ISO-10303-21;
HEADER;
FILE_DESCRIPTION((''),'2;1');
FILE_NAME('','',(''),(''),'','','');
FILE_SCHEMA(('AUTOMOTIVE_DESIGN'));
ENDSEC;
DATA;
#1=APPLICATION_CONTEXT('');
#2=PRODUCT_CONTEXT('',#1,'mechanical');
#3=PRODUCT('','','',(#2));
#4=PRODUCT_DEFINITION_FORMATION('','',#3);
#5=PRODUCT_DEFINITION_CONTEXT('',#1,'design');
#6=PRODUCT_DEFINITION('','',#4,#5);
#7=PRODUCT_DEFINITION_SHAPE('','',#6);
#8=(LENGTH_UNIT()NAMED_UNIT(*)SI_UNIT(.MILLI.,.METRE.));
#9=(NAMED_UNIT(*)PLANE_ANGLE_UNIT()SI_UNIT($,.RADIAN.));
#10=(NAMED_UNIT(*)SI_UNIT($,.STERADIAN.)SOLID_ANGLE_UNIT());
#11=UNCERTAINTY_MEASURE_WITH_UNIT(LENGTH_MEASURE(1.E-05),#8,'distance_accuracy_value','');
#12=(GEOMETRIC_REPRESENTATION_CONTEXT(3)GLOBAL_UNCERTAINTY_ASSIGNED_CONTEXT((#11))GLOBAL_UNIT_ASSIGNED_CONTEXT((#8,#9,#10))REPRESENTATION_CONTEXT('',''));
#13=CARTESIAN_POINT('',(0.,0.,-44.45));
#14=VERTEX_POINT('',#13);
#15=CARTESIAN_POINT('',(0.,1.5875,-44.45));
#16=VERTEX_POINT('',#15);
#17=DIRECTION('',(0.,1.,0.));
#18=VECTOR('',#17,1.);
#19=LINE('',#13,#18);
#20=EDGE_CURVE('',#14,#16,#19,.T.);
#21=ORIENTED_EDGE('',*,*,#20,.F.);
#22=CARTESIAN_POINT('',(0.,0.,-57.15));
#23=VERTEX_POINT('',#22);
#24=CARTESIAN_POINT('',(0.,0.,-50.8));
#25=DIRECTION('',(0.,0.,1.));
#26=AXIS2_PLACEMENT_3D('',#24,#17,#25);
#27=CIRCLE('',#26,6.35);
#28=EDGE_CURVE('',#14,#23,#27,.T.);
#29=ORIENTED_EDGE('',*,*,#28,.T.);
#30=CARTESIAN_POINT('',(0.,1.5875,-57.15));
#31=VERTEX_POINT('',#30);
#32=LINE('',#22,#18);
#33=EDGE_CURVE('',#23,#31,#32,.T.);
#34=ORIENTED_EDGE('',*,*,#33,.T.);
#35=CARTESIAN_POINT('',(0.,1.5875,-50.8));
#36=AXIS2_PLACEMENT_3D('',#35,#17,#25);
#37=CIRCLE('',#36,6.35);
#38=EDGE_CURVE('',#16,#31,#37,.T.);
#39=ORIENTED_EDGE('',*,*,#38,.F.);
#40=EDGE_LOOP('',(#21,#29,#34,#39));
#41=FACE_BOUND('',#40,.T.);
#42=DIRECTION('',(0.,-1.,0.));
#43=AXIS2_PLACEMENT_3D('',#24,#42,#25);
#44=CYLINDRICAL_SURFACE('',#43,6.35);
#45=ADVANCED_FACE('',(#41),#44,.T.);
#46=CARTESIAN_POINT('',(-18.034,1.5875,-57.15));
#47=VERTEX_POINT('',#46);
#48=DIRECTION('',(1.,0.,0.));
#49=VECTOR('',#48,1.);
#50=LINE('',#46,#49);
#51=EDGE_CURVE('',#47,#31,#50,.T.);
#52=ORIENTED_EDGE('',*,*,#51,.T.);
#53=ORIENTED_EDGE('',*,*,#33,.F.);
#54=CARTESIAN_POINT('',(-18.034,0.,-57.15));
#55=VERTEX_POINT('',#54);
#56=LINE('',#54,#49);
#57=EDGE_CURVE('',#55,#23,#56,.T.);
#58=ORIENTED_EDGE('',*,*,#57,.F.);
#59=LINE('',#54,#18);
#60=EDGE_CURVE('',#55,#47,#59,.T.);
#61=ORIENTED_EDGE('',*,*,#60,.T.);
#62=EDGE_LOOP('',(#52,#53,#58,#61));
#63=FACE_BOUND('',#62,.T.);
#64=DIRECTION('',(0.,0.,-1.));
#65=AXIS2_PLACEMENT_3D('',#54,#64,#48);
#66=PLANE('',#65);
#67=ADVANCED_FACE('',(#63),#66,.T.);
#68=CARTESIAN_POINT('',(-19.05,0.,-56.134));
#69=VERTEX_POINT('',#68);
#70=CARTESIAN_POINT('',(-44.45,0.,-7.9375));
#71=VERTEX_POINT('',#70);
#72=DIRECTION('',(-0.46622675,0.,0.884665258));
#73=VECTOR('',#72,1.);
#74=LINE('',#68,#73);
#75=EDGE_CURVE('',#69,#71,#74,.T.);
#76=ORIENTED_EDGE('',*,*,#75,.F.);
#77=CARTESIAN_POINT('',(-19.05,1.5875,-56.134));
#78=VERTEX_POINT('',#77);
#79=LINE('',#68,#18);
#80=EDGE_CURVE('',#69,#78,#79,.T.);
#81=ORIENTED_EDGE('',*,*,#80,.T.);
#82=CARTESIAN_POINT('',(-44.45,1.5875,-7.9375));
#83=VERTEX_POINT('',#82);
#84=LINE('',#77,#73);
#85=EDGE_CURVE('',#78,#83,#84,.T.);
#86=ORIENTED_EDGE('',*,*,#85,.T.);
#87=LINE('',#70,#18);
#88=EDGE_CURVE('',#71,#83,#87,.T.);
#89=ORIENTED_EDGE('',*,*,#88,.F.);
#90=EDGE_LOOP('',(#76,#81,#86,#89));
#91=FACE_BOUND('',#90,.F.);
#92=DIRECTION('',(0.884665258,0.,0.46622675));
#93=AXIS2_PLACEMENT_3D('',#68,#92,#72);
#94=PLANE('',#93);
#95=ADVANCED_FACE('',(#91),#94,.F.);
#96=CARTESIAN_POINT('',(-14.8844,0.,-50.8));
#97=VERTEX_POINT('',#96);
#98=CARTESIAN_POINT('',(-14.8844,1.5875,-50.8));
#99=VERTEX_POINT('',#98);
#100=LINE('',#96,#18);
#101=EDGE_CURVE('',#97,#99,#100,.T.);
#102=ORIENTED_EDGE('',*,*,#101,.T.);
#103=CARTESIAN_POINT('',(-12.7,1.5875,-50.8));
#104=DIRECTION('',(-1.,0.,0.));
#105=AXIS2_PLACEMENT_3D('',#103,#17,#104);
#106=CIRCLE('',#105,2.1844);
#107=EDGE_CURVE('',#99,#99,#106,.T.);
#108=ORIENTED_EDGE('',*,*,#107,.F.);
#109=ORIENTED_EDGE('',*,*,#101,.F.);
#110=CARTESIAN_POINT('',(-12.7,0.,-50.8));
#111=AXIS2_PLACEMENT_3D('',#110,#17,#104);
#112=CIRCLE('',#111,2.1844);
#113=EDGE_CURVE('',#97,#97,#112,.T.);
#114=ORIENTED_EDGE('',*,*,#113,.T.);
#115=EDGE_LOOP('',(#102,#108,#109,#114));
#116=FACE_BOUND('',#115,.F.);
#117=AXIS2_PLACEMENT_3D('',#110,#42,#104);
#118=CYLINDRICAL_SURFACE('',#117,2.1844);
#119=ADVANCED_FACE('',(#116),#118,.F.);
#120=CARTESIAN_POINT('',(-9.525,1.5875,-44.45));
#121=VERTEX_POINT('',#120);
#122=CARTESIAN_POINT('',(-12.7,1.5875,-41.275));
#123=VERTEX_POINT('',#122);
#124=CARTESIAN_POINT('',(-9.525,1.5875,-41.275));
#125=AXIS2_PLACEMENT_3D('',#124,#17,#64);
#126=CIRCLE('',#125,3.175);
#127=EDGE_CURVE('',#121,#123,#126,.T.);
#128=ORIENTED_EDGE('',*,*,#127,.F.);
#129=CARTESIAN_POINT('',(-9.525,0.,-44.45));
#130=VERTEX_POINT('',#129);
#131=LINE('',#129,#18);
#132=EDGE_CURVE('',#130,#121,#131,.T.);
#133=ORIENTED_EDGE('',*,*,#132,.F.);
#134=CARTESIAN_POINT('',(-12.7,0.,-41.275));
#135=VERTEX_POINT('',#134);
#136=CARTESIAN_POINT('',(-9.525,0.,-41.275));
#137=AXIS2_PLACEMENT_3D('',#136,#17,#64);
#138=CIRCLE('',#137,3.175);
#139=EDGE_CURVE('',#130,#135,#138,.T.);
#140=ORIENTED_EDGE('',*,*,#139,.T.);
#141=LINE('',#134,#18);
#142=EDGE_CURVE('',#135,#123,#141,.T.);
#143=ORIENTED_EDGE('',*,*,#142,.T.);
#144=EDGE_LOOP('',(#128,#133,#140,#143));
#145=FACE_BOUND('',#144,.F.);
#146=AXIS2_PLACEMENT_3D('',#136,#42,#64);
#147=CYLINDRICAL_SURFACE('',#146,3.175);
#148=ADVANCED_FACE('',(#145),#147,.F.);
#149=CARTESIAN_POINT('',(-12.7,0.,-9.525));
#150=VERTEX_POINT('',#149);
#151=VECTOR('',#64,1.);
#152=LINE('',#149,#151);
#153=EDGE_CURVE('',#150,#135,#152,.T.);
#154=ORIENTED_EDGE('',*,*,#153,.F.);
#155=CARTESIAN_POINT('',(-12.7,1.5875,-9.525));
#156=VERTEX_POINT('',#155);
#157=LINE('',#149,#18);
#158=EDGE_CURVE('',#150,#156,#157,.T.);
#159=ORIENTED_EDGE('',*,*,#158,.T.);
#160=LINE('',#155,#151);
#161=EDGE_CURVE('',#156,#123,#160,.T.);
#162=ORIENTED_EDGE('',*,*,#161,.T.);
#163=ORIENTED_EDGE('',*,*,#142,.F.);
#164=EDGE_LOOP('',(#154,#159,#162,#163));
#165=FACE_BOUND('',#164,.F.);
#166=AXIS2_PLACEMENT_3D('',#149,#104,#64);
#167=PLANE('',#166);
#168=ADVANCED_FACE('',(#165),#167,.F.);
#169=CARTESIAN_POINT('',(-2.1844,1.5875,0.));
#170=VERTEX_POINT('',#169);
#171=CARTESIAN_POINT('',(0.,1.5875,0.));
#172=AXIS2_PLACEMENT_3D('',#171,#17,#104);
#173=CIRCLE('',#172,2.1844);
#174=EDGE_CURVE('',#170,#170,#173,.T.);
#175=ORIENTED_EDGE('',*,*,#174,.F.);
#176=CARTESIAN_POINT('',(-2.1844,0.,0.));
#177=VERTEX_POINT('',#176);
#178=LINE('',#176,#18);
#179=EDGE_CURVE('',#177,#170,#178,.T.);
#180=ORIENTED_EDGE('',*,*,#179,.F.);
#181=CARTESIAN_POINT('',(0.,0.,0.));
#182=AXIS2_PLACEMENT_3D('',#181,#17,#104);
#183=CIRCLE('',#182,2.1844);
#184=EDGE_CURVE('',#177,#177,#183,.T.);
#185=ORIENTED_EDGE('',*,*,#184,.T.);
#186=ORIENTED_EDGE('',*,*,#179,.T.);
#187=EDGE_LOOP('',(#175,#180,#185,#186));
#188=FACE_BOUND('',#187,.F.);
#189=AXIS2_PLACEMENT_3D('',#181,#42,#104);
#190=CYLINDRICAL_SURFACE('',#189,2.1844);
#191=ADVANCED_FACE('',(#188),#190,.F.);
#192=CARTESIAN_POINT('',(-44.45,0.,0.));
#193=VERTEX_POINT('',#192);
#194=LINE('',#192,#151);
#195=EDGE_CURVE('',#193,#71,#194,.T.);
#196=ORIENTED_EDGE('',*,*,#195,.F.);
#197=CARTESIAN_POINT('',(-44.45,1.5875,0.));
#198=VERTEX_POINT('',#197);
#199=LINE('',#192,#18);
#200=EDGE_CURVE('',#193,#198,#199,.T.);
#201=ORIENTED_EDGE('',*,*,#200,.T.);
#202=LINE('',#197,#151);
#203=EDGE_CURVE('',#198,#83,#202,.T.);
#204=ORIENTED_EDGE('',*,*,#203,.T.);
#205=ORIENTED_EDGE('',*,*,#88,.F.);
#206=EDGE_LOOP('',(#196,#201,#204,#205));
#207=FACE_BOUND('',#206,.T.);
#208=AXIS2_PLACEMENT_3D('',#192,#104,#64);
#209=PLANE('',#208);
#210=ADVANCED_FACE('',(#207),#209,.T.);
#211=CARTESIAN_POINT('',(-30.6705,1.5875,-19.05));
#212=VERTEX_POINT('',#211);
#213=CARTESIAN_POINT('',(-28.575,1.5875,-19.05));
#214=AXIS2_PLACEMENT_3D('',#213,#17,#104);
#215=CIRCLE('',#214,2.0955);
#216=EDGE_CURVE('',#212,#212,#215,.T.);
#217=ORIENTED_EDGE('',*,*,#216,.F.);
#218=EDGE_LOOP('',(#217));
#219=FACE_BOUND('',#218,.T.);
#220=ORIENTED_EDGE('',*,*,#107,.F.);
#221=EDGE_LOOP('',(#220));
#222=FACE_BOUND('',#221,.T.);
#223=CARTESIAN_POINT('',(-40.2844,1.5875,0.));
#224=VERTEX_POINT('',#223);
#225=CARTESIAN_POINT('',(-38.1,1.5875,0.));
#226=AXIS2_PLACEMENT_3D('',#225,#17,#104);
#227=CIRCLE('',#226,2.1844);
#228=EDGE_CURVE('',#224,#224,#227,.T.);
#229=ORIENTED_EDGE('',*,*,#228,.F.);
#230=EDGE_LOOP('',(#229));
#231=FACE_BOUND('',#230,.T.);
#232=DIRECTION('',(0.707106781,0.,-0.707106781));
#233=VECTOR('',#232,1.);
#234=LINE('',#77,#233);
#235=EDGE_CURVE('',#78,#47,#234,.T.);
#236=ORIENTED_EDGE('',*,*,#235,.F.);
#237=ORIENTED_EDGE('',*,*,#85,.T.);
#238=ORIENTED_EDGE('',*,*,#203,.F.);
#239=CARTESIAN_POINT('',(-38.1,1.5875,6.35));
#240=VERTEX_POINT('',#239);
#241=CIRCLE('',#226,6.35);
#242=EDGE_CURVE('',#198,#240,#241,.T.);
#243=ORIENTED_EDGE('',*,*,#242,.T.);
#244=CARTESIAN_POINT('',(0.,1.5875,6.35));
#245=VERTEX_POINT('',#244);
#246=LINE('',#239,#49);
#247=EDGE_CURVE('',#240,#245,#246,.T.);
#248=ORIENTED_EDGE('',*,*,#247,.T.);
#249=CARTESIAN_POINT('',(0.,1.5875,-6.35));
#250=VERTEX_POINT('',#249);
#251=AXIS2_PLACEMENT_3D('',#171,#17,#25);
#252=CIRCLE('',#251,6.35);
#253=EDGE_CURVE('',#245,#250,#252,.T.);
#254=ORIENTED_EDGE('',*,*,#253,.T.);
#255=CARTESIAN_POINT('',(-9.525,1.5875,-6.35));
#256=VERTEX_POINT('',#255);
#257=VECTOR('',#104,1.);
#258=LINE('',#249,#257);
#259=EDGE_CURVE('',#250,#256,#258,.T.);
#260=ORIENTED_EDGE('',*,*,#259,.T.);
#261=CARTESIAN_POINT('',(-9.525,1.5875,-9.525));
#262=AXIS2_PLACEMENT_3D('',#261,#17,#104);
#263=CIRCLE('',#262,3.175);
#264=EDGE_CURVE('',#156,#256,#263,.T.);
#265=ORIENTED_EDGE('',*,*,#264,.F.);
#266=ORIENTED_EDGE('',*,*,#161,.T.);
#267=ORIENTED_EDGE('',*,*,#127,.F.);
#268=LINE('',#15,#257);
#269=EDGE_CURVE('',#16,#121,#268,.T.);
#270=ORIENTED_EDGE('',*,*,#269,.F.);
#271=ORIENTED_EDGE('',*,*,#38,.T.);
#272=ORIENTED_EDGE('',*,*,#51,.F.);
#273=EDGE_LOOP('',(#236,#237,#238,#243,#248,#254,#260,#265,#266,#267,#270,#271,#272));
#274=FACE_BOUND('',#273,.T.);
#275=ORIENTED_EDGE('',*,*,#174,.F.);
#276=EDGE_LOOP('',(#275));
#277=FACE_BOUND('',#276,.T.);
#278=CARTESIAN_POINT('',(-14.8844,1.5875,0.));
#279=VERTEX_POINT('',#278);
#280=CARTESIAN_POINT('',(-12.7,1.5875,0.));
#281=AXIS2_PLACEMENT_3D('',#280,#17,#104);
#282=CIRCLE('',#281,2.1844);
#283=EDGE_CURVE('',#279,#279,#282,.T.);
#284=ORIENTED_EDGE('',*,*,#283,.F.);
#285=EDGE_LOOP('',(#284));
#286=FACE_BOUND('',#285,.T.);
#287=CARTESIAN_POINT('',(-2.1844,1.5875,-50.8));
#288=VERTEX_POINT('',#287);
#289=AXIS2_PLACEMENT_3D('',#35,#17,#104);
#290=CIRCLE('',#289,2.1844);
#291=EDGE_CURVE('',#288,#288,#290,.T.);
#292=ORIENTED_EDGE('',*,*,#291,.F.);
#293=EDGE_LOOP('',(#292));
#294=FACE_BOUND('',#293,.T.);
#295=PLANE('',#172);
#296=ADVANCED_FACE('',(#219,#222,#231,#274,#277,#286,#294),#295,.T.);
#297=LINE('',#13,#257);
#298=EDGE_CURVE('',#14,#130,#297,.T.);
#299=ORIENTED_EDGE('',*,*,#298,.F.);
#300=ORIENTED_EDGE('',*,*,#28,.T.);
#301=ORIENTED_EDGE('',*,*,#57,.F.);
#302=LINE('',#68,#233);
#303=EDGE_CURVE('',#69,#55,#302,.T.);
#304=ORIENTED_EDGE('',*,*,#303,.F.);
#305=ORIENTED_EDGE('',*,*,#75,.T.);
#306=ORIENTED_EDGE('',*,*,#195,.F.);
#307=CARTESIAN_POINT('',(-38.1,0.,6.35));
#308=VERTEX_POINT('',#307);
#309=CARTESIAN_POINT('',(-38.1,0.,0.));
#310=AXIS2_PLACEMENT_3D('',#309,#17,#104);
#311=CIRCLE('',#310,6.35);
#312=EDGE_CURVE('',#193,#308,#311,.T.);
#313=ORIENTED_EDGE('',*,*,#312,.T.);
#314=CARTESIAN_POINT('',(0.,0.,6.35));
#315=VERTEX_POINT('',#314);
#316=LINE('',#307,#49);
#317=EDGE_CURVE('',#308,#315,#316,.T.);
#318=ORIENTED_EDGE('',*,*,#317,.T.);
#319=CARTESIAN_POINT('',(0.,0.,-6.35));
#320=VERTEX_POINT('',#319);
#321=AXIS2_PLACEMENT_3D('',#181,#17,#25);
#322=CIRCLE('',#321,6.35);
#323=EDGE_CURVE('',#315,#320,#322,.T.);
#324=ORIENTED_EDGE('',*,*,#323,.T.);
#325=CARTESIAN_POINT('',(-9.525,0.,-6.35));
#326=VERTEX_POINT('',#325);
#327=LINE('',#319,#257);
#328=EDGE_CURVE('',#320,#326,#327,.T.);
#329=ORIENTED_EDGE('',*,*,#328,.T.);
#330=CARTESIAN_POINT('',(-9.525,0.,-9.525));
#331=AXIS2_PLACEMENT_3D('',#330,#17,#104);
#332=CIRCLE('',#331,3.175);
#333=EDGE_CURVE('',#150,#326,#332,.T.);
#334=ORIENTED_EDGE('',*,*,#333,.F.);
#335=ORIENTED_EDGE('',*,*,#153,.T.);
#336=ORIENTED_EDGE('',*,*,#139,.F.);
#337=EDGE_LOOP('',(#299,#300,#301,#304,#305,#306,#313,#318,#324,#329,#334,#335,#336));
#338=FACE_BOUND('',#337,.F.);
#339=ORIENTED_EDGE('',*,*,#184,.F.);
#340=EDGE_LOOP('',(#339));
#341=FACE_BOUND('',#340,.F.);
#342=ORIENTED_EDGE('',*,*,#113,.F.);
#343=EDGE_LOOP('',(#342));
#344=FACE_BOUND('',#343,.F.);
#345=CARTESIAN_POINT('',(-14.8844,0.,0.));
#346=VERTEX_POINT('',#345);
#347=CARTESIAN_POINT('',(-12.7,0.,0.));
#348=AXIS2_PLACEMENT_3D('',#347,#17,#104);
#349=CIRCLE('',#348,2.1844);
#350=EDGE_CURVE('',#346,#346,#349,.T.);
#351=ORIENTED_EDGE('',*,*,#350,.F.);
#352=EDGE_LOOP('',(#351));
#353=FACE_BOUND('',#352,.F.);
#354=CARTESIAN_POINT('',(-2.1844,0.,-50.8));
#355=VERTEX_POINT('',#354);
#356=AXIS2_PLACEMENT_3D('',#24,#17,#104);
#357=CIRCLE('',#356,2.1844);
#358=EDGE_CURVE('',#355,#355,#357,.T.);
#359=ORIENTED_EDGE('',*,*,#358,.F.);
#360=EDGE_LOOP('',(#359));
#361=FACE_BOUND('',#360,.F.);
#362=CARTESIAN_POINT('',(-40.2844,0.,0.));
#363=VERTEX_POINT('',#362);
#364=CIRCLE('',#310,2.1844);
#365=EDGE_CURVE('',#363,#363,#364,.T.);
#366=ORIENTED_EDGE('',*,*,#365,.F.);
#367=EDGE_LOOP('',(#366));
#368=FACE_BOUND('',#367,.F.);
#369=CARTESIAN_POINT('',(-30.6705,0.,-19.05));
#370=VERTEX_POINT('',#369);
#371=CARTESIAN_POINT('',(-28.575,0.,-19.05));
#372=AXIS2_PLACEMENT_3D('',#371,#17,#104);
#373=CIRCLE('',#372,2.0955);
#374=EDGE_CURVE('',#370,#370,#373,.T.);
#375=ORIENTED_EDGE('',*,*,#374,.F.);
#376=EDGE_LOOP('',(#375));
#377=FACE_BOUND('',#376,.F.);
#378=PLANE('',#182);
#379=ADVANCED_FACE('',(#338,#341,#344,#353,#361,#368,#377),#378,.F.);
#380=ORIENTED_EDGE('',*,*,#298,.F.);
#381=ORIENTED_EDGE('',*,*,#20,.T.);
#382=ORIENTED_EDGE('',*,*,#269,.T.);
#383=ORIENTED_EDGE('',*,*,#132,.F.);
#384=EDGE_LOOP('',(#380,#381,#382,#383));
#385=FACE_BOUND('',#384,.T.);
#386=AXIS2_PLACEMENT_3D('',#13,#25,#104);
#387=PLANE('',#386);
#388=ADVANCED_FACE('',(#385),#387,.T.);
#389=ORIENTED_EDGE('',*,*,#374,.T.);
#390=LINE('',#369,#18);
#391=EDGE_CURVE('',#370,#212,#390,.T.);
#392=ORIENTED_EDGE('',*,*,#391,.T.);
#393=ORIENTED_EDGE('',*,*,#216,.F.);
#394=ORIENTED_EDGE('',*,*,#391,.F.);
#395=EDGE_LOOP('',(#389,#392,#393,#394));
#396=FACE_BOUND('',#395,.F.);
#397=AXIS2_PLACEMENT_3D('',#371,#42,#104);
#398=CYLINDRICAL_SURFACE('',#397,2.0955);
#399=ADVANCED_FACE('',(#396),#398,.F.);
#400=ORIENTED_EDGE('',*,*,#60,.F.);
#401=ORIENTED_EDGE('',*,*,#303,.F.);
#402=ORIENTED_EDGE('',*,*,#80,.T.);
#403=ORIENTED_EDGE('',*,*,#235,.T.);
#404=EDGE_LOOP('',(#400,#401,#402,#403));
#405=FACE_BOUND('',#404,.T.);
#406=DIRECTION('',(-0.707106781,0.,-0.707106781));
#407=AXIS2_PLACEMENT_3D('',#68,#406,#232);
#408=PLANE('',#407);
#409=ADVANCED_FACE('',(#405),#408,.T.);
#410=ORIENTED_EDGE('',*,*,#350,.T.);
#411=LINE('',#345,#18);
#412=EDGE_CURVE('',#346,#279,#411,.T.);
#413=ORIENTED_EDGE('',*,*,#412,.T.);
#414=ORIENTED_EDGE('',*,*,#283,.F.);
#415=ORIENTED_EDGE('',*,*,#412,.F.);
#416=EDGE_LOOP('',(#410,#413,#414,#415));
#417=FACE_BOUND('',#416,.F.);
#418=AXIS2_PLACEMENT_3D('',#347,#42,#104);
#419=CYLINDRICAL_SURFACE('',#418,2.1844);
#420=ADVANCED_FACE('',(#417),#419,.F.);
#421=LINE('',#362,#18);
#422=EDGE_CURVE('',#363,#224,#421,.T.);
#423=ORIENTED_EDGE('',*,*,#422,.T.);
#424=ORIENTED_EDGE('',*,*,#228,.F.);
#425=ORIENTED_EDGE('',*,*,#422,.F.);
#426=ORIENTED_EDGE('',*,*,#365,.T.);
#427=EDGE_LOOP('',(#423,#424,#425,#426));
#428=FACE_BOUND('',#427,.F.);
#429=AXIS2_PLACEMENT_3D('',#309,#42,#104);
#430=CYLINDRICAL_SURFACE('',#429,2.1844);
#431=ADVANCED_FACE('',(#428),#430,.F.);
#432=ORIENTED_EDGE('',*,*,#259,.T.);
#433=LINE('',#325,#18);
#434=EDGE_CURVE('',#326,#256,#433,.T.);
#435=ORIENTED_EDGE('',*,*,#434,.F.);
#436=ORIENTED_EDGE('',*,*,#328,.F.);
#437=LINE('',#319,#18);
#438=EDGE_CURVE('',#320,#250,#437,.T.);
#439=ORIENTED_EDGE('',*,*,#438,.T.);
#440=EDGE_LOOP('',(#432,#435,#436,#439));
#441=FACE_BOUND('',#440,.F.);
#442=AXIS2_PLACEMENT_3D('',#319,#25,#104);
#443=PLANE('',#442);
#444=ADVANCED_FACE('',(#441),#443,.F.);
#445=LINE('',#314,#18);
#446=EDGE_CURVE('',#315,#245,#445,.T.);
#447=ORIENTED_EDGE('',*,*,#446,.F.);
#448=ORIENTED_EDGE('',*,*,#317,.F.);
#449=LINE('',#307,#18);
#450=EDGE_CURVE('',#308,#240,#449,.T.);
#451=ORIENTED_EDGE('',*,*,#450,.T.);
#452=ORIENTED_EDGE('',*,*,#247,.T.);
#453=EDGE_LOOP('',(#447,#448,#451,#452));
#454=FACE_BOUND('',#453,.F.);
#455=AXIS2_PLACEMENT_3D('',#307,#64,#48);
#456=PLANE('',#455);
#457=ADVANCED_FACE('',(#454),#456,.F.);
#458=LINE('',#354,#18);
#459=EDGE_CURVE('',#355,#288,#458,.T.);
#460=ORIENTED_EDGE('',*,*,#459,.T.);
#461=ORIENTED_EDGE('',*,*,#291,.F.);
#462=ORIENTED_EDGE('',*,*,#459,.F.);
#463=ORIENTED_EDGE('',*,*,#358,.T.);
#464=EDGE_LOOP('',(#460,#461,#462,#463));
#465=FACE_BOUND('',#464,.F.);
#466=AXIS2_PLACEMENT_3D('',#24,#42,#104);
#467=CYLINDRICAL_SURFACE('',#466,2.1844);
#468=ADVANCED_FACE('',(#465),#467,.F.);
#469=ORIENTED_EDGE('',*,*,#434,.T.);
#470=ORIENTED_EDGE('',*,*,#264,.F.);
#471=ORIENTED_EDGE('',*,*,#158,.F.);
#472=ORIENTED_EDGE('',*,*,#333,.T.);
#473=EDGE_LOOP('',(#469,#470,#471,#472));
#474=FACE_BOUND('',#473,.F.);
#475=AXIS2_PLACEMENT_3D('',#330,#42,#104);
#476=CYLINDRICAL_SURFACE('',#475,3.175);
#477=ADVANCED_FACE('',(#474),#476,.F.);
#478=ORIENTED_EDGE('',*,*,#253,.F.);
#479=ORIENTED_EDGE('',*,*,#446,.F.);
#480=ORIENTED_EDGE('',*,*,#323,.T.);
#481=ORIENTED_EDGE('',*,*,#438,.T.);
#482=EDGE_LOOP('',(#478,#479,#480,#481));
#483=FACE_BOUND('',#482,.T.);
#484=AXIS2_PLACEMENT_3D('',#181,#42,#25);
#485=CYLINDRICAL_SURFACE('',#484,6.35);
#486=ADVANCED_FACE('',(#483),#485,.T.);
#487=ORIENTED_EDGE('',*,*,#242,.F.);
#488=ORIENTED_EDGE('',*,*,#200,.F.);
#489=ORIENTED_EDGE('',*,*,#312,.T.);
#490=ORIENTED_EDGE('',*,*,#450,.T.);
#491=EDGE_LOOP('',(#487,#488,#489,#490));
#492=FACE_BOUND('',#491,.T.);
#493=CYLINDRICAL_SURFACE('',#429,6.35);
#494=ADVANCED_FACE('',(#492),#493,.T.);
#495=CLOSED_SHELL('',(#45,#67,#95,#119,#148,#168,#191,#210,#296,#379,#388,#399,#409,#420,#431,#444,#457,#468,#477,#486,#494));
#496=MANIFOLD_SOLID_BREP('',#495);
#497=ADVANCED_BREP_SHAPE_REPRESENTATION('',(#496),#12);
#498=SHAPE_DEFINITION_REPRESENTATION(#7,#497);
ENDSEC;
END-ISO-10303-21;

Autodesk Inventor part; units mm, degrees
ref_plane "YZ Plane" through (0, 0, 0) normal (1, 0, 0) x (0, 1, 0)
ref_plane "XZ Plane" through (0, 0, 0) normal (0, 1, 0) x (-1, 0, 0)
ref_plane "XY Plane" through (0, 0, 0) normal (0, 0, 1) x (1, 0, 0)
sketch "main" plane through (0, 0, 0) normal (0, 0, 1) x (1, 0, 0)
  circle A0 centre (18.656, 25.5497) radius 2.1844
  circle A1 centre (-6.744, 25.5497) radius 2.1844
  line L0 (-6.744, 16.0247) -> (-6.744, -15.7253)
  line L1 (-0.394, -30.5843) -> (25.006, 17.6122)
  arc A2 (-6.744, 16.0247) -> (-9.919, 19.1997) centre (-9.919, 16.0247) ccw
  line L2 (-19.444, 19.1997) -> (-9.919, 19.1997)
  circle A3 centre (-19.444, 25.5497) radius 2.1844
  arc A4 (-19.444, 31.8997) -> (-19.444, 19.1997) centre (-19.444, 25.5497) ccw
  line L3 (25.006, 25.5497) -> (25.006, 17.6122)
  line L4 (18.656, 31.8997) -> (-19.444, 31.8997)
  arc A5 (25.006, 25.5497) -> (18.656, 31.8997) centre (18.656, 25.5497) ccw
  arc A6 (-9.919, -18.9003) -> (-6.744, -15.7253) centre (-9.919, -15.7253) ccw
  line L5 (-19.444, -18.9003) -> (-9.919, -18.9003)
  circle A7 centre (-6.744, -25.2503) radius 2.1844
  line L6 (-0.394, -30.5843) -> (-1.41, -31.6003)
  circle A8 centre (-19.444, -25.2503) radius 2.1844
  arc A9 (-19.444, -18.9003) -> (-19.444, -31.6003) centre (-19.444, -25.2503) ccw
  line L7 (-1.41, -31.6003) -> (-19.444, -31.6003)
  circle A10 centre (9.131, 6.4997) radius 2.0955
  point P0 (-4.4485, 2.2347)
  dimension "d0" = 3.175
  dimension "d3" = 4.191
sketch "Sketch1" plane through (0, 0, 0) normal (0, 1, 0) x (-1, 0, 0)
  circle A0 centre (38.1, 0) radius 2.1844
  circle A1 centre (12.7, 0) radius 2.1844
  line L0 (12.7, -9.525) -> (12.7, -41.275)
  line L1 (19.05, -56.134) -> (44.45, -7.9375)
  arc A2 (12.7, -9.525) -> (9.525, -6.35) centre (9.525, -9.525) ccw
  line L2 (0, -6.35) -> (9.525, -6.35)
  circle A3 centre (0, 0) radius 2.1844
  arc A4 (0, 6.35) -> (0, -6.35) centre (0, 0) ccw
  line L3 (44.45, 0) -> (44.45, -7.9375)
  line L4 (38.1, 6.35) -> (0, 6.35)
  arc A5 (44.45, 0) -> (38.1, 6.35) centre (38.1, 0) ccw
  arc A6 (9.525, -44.45) -> (12.7, -41.275) centre (9.525, -41.275) ccw
  line L5 (0, -44.45) -> (9.525, -44.45)
  circle A7 centre (12.7, -50.8) radius 2.1844
  line L6 (19.05, -56.134) -> (18.034, -57.15)
  circle A8 centre (0, -50.8) radius 2.1844
  arc A9 (0, -44.45) -> (0, -57.15) centre (0, -50.8) ccw
  line L7 (18.034, -57.15) -> (0, -57.15)
  circle A10 centre (28.575, -19.05) radius 2.0955
extrude "Extrusion1" add sketch "Sketch1" along normal blind 1.5875
properties part number "gusset" material "Acetal Resin, White"
